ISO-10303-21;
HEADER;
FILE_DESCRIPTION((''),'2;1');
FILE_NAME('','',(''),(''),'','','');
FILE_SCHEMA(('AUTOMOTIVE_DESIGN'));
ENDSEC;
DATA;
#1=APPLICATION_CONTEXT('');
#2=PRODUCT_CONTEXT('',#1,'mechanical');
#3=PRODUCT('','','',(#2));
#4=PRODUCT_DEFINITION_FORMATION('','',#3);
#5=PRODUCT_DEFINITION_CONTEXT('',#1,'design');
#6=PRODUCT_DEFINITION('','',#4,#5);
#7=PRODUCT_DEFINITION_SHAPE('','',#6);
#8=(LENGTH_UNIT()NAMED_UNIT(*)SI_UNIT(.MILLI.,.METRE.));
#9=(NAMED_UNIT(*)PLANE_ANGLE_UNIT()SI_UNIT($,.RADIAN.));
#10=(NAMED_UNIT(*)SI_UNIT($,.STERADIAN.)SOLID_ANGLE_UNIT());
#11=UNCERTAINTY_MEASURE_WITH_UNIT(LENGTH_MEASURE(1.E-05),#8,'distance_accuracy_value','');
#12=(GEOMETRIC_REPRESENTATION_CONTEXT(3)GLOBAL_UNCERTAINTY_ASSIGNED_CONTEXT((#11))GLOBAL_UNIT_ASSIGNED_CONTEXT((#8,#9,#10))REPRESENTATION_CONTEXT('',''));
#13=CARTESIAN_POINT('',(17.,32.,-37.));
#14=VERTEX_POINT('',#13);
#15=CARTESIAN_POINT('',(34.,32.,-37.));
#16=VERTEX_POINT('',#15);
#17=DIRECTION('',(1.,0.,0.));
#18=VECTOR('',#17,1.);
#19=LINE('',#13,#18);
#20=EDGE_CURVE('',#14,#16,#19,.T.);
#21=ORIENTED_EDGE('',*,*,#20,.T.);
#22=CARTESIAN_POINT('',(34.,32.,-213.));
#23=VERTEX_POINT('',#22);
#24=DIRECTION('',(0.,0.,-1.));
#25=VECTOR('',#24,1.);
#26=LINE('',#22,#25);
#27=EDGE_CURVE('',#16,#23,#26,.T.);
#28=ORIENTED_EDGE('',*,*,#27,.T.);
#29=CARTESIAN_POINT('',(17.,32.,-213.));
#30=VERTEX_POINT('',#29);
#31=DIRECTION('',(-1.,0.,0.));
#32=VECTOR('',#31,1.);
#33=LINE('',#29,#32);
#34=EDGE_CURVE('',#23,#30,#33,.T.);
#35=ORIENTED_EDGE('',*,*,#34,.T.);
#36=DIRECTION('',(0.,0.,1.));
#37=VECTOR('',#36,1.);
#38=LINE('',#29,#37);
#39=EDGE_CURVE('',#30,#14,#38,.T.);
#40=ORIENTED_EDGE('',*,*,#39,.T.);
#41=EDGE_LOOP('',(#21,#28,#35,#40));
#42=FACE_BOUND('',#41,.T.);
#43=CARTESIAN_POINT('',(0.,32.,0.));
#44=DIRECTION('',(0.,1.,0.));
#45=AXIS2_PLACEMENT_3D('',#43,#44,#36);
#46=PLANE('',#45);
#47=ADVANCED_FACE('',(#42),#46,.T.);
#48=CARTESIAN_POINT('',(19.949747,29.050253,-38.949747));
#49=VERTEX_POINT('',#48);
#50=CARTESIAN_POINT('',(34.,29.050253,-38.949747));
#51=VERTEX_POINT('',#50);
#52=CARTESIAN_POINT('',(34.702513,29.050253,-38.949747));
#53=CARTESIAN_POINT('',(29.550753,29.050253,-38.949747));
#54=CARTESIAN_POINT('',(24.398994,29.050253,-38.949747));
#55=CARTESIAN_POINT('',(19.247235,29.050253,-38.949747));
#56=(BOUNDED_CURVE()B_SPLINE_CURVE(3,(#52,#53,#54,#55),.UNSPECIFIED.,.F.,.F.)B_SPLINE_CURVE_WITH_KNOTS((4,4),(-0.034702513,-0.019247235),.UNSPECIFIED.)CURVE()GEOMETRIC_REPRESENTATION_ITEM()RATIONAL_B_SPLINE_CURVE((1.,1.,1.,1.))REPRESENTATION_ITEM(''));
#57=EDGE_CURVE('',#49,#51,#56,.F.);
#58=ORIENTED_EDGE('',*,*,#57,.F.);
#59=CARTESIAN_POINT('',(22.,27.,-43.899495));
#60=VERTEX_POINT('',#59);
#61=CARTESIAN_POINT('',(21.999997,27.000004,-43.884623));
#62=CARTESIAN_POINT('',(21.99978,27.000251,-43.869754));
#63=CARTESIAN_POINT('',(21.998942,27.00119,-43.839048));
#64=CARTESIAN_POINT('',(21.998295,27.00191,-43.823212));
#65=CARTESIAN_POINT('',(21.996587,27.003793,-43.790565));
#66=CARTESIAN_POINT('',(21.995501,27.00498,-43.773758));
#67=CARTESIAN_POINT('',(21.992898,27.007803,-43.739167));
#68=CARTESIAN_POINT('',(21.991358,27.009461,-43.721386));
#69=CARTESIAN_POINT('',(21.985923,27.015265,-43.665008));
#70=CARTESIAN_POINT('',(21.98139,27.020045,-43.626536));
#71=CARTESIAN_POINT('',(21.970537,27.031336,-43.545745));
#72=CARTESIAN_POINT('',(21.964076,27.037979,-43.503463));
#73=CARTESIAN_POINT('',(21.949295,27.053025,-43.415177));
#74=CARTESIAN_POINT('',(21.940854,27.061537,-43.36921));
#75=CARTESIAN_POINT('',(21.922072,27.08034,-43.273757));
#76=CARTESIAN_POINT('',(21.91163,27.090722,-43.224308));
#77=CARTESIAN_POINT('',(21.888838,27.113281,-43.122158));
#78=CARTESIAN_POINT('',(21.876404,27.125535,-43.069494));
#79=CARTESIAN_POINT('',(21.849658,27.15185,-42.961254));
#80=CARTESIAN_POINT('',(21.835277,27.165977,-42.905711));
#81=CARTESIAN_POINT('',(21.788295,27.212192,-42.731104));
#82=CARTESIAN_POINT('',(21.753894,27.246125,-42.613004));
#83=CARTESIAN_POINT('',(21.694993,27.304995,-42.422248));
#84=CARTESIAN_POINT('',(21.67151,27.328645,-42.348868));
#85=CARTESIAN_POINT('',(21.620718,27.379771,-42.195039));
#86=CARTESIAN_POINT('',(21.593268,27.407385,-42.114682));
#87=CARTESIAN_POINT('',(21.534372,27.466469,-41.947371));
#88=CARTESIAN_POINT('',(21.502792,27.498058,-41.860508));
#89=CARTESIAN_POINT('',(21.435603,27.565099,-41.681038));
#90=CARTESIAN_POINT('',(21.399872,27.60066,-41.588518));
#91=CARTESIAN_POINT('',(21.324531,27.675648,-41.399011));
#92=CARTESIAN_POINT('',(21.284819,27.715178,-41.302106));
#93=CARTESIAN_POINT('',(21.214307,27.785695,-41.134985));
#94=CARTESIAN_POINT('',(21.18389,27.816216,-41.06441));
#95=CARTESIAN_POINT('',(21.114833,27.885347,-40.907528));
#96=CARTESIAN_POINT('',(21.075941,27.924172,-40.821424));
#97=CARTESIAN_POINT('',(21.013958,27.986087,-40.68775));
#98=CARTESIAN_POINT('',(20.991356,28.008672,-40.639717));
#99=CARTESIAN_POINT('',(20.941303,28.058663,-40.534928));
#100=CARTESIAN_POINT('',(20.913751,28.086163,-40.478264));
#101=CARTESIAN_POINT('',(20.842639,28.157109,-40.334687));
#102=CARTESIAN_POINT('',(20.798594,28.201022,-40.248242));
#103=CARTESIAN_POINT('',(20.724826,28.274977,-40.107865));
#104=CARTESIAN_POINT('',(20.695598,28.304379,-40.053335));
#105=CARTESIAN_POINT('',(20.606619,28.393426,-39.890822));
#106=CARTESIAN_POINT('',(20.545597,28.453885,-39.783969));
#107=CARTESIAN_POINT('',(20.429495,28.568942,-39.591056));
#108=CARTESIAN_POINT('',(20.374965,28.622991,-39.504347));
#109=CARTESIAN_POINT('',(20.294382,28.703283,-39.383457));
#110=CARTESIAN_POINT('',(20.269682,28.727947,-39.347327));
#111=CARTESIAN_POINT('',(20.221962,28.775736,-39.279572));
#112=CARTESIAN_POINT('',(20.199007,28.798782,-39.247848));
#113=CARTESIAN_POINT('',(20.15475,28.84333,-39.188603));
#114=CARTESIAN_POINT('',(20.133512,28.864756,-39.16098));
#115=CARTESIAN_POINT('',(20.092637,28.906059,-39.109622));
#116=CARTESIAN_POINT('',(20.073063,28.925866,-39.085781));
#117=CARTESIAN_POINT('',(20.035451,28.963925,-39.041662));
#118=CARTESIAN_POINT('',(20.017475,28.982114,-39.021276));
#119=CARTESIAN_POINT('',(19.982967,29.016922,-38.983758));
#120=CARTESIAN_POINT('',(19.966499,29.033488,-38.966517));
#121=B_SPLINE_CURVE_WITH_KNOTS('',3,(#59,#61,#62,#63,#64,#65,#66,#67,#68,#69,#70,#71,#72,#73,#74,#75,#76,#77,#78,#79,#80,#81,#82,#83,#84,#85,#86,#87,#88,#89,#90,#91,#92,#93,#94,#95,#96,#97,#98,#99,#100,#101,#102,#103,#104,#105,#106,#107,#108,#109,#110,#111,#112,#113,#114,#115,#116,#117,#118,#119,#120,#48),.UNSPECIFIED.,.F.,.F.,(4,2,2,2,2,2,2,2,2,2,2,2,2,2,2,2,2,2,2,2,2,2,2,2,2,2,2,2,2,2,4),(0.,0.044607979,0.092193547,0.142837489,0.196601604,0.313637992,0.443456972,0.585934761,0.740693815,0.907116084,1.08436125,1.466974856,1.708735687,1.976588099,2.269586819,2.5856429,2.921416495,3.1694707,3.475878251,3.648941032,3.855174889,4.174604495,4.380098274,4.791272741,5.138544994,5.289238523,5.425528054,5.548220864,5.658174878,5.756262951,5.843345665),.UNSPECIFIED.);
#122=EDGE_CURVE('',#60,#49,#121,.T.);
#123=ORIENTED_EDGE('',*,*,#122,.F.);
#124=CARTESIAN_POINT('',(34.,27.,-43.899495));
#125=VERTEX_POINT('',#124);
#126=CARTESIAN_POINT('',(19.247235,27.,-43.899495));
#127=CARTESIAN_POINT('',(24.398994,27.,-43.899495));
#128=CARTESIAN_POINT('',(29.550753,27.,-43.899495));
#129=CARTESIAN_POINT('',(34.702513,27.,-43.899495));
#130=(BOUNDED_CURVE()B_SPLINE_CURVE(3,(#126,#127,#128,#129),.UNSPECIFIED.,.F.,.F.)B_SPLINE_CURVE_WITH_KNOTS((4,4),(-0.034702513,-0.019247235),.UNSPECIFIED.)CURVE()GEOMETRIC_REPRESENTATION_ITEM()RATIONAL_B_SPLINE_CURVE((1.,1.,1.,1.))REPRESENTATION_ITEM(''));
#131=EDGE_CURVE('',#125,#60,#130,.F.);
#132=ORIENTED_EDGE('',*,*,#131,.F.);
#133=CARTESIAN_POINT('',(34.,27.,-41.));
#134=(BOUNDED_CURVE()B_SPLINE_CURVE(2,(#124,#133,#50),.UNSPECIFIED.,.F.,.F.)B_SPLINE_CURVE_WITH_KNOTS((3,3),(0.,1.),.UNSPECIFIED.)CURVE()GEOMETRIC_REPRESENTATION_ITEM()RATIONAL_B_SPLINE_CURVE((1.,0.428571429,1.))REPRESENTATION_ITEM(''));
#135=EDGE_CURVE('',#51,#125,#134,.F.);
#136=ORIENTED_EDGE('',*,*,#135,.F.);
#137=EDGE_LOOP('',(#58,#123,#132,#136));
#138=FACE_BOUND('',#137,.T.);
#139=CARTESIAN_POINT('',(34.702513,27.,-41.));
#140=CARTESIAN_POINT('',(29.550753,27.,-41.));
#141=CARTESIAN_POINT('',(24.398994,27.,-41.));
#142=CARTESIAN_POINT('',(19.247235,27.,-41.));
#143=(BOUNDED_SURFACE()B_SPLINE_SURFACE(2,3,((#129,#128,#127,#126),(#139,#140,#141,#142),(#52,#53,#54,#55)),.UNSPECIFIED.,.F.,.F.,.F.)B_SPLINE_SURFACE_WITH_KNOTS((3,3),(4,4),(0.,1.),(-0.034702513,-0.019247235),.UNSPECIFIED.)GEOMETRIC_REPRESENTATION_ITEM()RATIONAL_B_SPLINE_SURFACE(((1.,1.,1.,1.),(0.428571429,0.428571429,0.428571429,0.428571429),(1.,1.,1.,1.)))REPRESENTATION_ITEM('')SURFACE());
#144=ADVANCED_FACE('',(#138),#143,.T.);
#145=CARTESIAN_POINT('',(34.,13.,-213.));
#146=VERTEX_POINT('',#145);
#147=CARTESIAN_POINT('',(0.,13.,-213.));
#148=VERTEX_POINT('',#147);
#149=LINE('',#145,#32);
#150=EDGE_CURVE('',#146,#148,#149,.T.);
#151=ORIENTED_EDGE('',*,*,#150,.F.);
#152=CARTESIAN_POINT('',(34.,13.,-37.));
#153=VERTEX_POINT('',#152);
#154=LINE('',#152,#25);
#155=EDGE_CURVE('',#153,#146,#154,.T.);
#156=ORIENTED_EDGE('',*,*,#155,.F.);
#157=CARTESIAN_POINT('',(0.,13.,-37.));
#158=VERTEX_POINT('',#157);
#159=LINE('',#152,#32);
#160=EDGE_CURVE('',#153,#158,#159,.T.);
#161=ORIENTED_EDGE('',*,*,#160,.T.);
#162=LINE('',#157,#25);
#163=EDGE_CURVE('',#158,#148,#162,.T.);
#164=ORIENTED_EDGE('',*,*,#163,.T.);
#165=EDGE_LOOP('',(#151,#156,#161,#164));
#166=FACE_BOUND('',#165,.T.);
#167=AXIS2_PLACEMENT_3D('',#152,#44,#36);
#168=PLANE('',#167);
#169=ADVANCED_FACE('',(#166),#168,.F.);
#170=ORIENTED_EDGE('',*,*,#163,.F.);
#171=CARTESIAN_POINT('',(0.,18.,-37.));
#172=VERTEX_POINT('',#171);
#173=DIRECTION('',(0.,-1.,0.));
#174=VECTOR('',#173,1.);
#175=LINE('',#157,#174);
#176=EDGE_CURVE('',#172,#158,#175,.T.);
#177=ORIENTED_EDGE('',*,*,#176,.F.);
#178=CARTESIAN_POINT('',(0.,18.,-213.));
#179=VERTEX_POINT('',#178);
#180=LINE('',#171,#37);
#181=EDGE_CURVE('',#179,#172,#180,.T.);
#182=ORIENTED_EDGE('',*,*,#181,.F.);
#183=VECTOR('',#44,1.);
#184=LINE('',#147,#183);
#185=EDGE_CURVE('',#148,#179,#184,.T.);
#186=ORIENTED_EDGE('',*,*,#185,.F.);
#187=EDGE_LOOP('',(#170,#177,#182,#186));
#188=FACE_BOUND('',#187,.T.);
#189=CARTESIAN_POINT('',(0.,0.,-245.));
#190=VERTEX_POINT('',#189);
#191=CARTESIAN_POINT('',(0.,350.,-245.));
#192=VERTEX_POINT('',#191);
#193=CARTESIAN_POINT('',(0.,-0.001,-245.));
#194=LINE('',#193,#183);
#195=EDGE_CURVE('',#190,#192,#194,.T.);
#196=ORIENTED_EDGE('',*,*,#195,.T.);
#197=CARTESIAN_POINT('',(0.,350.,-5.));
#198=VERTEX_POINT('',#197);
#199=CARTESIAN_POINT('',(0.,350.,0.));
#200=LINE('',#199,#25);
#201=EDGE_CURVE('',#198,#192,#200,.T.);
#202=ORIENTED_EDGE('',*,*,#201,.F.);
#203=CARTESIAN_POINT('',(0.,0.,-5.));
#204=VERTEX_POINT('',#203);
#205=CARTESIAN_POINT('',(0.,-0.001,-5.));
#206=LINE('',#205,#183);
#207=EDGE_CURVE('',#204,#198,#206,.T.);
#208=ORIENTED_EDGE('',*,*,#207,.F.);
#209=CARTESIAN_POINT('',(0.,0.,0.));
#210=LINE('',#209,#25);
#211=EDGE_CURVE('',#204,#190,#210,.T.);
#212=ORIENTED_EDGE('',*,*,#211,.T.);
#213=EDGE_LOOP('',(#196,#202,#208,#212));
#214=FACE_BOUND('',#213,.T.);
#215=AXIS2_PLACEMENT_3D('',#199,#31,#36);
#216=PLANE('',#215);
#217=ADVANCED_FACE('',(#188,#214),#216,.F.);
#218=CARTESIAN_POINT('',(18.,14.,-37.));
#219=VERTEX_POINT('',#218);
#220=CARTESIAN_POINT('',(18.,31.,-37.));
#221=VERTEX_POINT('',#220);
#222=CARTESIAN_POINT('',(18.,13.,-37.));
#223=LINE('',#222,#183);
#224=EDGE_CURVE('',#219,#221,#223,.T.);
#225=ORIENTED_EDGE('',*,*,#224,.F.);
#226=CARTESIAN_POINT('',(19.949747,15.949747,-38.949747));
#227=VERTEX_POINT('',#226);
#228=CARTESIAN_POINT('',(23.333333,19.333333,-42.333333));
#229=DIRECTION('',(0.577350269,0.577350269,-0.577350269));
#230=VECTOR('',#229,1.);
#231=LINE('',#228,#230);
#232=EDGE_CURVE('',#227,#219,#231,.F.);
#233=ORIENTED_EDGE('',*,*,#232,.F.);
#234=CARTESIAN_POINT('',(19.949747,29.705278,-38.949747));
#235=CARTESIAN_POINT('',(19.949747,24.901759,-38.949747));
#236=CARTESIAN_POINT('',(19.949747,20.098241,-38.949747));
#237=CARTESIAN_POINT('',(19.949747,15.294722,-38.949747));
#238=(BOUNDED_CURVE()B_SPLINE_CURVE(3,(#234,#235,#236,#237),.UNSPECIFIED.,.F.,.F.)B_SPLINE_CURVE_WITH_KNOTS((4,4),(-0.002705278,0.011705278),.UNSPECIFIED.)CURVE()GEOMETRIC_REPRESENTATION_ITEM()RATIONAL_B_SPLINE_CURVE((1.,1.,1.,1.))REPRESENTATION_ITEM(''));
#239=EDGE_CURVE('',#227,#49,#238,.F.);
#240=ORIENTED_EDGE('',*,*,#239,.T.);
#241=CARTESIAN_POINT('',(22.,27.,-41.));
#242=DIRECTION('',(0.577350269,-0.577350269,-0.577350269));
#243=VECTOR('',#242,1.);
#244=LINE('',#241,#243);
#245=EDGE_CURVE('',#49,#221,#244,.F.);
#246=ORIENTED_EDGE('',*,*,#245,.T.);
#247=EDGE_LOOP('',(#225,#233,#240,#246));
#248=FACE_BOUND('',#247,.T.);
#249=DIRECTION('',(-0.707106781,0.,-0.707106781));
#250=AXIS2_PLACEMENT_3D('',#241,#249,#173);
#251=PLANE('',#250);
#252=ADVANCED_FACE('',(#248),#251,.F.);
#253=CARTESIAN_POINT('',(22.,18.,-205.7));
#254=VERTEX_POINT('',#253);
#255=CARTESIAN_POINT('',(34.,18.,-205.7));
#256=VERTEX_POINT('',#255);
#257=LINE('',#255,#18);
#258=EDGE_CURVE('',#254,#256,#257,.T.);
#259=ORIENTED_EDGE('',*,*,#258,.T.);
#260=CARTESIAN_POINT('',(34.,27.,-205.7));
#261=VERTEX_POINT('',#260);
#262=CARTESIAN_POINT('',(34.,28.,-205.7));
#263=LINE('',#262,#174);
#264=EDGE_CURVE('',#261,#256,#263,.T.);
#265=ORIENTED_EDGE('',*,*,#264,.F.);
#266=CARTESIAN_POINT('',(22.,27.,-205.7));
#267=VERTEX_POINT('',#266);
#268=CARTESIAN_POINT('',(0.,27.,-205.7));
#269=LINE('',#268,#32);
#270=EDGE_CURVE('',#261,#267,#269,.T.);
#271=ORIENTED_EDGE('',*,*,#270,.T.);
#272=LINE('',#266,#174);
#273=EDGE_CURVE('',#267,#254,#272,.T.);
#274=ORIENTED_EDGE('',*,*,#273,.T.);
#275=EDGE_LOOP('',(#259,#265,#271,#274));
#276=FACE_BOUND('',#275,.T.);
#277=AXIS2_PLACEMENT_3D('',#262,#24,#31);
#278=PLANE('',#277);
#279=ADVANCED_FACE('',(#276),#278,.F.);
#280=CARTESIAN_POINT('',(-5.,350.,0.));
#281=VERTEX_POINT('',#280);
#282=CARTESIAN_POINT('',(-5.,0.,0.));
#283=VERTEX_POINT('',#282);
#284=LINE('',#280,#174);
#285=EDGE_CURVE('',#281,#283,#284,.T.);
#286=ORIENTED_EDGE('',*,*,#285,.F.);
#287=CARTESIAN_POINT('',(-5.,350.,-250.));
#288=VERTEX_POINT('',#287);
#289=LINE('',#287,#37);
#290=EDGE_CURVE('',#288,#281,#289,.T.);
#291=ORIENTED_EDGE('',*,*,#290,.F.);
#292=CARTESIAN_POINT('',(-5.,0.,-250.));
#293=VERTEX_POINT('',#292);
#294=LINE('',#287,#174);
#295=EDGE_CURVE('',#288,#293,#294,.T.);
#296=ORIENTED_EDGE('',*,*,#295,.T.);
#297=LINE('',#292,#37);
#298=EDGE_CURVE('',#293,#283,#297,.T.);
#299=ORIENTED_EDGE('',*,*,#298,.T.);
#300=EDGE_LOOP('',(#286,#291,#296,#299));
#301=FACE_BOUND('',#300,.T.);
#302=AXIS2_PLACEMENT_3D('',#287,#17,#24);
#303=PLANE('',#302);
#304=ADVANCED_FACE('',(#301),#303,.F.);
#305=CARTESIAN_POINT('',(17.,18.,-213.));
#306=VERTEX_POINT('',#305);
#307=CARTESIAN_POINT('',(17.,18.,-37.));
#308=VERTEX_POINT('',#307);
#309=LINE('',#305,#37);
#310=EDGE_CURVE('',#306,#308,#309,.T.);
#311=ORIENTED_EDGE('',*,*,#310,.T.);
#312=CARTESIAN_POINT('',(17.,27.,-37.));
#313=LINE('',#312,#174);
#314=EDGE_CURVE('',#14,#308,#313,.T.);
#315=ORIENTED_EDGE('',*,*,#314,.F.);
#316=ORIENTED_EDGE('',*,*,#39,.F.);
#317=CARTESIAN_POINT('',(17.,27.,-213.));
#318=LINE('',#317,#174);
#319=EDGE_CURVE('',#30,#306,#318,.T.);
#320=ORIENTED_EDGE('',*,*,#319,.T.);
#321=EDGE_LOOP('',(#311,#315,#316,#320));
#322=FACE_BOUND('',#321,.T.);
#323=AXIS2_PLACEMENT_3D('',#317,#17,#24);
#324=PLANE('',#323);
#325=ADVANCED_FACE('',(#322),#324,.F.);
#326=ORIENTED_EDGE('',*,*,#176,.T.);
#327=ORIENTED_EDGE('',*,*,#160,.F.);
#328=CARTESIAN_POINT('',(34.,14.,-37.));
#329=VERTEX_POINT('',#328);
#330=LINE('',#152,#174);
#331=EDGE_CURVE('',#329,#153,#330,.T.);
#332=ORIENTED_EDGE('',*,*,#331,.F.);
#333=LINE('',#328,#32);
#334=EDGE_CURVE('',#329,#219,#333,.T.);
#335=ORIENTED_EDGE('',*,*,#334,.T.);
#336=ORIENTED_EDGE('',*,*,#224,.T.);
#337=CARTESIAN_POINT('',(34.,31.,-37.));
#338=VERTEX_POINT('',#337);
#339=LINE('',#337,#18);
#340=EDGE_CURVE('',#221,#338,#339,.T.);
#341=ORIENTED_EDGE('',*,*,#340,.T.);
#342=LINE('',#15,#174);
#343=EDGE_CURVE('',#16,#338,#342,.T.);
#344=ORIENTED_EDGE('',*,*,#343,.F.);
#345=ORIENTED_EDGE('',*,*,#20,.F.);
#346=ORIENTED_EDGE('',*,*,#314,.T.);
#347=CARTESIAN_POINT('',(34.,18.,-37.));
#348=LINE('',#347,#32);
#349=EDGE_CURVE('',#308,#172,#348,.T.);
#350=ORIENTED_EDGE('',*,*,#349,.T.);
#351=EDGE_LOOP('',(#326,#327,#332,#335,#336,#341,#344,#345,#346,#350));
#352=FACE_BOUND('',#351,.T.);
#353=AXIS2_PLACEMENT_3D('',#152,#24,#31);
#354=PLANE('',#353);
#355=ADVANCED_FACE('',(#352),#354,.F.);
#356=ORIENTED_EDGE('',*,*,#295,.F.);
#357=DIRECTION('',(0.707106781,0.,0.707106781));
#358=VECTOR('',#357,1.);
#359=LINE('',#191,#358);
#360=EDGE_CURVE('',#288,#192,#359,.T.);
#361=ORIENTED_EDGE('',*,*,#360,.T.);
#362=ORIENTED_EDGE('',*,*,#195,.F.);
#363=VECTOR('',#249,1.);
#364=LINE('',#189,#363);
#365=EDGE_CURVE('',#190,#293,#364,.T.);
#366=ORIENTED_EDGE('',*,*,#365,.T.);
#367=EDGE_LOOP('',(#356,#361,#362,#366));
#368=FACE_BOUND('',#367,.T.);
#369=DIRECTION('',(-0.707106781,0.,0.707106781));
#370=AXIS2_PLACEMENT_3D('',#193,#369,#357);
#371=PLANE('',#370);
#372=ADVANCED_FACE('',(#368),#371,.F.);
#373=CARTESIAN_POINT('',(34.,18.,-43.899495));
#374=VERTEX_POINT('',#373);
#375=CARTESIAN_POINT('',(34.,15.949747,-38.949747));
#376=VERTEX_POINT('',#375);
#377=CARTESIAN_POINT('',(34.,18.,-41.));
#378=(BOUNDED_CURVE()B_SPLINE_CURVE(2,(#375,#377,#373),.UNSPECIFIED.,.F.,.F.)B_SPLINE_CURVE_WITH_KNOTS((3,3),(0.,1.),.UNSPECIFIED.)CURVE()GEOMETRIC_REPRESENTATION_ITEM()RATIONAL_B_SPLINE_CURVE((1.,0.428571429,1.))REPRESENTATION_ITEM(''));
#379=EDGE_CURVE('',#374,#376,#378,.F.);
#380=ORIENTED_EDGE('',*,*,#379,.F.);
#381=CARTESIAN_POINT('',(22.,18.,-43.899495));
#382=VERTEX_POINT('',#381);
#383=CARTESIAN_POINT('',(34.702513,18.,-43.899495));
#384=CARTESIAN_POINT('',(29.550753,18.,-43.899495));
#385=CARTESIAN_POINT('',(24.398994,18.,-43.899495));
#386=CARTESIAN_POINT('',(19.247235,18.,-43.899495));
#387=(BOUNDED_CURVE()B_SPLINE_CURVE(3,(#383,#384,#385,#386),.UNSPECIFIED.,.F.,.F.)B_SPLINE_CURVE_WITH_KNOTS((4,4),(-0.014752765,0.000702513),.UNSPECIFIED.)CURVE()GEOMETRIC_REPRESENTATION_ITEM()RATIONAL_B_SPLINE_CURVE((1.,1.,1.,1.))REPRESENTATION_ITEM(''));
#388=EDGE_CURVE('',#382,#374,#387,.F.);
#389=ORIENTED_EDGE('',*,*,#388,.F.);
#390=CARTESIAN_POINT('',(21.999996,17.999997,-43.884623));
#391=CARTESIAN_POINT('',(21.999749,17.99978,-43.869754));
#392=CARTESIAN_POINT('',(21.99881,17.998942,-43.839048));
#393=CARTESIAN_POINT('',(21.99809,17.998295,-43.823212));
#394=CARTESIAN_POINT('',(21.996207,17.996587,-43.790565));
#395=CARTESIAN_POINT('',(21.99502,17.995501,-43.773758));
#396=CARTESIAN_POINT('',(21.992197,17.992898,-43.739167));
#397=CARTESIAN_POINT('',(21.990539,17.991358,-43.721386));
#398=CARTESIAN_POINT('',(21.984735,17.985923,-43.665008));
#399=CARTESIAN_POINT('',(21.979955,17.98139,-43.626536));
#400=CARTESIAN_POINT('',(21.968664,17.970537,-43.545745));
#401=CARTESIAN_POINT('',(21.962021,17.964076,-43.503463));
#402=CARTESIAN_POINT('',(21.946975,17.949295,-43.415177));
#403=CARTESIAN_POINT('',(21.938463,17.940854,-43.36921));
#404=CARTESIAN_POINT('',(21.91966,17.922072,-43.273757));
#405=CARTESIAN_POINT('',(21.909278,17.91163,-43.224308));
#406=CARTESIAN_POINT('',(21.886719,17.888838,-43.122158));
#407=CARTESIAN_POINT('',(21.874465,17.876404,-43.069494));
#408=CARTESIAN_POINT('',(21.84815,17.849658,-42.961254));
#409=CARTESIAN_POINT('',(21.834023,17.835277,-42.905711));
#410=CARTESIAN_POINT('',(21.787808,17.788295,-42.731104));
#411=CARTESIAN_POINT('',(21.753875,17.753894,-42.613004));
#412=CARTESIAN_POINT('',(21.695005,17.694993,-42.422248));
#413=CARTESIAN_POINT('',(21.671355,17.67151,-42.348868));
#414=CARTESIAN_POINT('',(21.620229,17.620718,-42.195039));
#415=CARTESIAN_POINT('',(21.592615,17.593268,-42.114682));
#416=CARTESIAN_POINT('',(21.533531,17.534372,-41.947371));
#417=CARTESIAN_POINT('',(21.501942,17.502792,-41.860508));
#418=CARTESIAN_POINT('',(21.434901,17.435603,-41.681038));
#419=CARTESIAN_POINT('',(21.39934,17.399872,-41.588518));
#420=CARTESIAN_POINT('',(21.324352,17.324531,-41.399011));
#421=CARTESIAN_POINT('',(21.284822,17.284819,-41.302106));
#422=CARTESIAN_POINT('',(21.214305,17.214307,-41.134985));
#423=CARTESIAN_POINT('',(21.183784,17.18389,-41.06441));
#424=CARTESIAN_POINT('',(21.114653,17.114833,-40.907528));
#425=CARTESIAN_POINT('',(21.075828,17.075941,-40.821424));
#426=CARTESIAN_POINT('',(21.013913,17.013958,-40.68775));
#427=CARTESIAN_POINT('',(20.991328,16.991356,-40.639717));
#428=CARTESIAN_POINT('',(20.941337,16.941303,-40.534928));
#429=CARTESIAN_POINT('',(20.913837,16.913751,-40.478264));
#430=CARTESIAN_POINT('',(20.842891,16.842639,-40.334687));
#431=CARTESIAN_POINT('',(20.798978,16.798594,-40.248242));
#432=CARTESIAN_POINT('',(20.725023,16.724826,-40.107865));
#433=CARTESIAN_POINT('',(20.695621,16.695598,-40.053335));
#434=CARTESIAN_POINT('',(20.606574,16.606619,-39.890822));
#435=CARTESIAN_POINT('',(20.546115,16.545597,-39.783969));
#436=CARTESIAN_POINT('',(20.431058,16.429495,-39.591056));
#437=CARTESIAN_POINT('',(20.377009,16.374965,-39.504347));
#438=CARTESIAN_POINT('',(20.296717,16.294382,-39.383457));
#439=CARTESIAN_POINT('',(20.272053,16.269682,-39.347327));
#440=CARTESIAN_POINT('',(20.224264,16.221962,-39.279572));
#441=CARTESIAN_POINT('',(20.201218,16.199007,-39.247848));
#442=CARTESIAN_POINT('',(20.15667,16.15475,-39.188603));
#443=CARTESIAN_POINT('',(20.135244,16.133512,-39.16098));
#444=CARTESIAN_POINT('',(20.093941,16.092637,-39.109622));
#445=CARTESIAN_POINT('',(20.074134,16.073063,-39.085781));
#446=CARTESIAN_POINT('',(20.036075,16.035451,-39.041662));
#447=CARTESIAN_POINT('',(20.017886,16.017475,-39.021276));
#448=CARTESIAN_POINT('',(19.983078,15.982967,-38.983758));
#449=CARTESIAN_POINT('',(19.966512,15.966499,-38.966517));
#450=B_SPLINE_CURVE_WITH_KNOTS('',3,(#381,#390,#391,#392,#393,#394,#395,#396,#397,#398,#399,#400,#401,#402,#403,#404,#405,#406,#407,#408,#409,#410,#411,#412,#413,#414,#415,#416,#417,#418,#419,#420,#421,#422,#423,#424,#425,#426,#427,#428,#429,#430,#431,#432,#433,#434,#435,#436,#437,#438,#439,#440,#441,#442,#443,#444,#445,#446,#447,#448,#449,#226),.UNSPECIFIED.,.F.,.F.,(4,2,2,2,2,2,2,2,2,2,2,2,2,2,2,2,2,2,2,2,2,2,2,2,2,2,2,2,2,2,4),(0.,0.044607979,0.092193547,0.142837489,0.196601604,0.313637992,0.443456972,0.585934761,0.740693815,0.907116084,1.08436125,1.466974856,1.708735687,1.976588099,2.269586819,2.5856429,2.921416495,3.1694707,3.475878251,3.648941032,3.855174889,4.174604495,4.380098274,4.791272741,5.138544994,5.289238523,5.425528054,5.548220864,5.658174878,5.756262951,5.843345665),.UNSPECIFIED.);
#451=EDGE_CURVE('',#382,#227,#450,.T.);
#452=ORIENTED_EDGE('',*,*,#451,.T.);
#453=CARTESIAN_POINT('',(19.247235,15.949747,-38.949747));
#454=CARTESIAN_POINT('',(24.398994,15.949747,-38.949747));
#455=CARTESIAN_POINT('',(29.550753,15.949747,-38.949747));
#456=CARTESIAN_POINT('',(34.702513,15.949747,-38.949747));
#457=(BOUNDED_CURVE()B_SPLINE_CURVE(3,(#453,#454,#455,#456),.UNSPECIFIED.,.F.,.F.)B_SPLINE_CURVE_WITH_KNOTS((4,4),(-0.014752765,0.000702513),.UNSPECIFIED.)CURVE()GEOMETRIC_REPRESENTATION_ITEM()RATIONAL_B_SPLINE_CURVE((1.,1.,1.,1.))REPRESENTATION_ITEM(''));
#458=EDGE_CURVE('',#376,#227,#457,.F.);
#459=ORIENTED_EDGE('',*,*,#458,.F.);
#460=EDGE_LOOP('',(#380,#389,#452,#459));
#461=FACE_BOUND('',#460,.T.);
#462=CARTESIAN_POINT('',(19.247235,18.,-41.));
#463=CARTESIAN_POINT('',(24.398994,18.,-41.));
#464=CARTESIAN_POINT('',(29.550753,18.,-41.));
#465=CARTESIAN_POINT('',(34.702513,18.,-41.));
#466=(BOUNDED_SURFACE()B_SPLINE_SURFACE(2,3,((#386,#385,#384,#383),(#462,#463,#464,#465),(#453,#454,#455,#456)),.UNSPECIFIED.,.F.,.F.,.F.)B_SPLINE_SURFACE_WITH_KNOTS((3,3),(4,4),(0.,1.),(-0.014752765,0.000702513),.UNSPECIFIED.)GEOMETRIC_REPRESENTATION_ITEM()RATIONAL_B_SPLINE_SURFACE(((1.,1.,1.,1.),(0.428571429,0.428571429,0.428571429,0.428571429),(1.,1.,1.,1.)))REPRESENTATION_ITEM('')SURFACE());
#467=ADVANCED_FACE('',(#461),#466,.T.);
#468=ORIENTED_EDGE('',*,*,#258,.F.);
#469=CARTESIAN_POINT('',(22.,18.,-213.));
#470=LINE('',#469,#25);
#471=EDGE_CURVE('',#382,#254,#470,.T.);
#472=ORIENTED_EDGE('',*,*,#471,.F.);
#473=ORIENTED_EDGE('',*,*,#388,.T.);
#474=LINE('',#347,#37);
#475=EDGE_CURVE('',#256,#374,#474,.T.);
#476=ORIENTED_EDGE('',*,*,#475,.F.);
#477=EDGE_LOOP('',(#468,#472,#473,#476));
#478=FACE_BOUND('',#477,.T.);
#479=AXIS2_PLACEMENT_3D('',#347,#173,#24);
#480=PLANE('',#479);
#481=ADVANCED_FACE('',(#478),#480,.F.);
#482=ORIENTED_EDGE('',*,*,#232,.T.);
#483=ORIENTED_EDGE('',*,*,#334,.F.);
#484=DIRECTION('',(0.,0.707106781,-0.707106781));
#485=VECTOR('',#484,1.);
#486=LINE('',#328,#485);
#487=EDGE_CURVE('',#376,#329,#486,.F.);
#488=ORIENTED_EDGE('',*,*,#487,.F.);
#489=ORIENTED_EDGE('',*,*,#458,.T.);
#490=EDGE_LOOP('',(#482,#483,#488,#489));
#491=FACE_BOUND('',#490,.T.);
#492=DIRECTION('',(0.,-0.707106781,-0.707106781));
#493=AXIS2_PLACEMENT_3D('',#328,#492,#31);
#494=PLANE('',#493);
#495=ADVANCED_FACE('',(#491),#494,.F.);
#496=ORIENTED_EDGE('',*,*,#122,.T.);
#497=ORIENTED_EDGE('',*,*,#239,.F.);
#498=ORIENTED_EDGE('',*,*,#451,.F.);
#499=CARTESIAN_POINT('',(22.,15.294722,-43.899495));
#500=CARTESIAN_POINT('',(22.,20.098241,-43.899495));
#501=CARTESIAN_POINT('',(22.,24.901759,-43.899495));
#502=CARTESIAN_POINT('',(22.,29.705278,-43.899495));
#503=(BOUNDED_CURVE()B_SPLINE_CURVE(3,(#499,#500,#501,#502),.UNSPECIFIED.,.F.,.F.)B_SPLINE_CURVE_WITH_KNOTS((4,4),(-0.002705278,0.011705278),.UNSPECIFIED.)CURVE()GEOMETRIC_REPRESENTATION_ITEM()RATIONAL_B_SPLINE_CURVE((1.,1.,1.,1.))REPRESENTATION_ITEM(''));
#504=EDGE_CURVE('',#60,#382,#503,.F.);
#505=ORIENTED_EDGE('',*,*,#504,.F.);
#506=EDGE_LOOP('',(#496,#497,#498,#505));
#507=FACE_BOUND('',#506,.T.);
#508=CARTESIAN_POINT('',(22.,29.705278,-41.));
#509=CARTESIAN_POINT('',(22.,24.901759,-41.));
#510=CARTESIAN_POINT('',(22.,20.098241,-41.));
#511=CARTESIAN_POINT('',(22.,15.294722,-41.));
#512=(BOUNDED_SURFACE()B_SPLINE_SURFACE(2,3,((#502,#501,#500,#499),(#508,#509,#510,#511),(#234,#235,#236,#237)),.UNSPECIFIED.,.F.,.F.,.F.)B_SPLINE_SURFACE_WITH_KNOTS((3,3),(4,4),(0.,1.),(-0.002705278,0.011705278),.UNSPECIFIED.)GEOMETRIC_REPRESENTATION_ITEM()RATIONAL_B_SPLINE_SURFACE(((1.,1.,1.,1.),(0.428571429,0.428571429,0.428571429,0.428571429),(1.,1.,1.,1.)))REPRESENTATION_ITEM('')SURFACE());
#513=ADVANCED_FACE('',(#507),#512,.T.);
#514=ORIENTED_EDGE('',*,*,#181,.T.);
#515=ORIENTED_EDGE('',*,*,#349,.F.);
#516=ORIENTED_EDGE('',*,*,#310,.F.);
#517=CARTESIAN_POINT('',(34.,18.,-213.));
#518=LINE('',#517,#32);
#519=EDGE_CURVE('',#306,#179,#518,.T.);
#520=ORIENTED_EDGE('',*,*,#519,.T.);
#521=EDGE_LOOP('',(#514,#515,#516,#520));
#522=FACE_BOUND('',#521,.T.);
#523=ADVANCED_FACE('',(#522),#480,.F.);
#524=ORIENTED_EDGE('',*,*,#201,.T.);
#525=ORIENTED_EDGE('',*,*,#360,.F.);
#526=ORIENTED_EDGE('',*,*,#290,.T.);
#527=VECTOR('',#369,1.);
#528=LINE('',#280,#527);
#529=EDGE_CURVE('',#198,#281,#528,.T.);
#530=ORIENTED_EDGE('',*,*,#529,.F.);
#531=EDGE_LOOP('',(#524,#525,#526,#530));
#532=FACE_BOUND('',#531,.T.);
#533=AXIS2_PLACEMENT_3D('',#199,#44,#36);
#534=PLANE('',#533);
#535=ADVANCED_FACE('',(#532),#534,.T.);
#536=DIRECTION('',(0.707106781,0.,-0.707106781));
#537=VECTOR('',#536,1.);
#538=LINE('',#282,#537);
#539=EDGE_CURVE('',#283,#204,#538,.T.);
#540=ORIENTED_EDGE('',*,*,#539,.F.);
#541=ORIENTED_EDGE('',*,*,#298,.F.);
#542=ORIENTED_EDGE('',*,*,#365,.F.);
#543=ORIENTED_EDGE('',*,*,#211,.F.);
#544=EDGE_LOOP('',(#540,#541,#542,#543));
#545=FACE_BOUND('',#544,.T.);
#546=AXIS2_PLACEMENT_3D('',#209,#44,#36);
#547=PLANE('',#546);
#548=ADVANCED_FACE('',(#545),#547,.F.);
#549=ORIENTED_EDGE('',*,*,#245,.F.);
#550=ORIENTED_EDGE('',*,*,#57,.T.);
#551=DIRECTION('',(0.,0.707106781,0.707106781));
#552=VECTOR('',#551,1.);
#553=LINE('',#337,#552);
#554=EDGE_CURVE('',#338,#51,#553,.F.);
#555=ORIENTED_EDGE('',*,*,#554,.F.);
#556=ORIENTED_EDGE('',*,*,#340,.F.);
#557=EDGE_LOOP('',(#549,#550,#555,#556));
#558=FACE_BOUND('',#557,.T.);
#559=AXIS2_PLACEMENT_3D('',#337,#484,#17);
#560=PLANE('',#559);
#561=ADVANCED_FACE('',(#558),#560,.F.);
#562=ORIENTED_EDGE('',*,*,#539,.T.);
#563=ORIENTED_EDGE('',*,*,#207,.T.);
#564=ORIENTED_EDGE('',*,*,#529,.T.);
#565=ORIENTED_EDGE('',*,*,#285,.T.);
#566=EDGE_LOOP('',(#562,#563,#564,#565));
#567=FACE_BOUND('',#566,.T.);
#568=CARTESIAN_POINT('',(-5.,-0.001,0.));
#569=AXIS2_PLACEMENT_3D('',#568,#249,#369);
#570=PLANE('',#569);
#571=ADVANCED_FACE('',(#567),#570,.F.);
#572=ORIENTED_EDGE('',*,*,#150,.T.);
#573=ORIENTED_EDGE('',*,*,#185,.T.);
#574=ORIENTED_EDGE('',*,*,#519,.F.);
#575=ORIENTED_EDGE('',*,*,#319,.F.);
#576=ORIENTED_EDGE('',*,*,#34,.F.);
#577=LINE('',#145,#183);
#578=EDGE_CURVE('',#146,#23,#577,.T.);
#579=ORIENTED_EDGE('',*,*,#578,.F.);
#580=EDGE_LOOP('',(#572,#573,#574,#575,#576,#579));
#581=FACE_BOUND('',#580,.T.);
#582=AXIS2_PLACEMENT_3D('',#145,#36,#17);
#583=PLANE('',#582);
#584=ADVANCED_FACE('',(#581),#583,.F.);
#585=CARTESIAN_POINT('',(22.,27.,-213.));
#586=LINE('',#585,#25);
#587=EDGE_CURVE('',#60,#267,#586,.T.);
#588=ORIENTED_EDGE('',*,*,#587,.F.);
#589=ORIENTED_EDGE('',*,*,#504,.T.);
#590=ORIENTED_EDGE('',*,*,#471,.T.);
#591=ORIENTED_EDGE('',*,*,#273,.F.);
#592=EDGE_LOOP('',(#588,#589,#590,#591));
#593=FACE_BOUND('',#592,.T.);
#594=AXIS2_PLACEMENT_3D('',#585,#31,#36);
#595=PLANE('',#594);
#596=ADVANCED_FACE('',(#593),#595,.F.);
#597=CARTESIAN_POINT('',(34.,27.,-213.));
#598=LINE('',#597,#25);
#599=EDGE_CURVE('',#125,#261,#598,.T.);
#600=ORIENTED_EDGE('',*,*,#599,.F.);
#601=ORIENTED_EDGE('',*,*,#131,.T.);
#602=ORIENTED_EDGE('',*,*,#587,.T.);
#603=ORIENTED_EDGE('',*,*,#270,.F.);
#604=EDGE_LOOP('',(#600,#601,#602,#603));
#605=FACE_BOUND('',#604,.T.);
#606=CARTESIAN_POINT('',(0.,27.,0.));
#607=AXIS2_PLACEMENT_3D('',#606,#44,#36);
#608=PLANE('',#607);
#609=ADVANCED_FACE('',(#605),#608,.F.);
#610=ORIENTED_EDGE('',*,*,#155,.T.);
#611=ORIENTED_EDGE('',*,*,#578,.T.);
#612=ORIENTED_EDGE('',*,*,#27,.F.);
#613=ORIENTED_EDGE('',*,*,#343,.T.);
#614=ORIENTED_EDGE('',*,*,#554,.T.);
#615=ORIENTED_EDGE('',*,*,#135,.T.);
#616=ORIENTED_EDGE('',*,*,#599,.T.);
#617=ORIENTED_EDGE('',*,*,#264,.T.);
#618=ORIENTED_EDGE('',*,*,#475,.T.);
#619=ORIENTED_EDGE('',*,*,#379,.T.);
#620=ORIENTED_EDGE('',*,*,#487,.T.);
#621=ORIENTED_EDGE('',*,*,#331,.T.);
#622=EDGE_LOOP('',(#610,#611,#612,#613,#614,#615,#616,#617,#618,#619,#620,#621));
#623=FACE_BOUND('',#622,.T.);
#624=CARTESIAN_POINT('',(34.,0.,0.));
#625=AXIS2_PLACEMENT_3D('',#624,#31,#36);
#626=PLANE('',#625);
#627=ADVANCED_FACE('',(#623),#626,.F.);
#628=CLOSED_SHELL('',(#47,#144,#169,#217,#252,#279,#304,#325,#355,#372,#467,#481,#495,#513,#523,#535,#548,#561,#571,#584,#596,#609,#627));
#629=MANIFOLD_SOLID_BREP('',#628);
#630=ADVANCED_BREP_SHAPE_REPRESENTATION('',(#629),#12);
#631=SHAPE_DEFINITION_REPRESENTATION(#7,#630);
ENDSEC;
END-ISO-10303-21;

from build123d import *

# Parameters (mm, degrees)
CROQUIS1_W              = 5
CROQUIS1_H              = 250
SALIENTE_EXTRUIR1_DEPTH = 350
CORTAR_EXTRUIR1_REACH   = 432.145
CROQUIS4_W              = 176
CROQUIS4_H              = 5
SALIENTE_EXTRUIR2_DEPTH = 34
CROQUIS5_W              = 5
CROQUIS5_H              = 176
SALIENTE_EXTRUIR3_DEPTH = 9
CROQUIS6_W              = 17
CROQUIS6_H              = 176
SALIENTE_EXTRUIR4_DEPTH = 5
CHAFL_N1_SIZE           = 4
CROQUIS7_W              = 14.582348404
CROQUIS7_H              = 7.3
SALIENTE_EXTRUIR5_DEPTH = 10


with BuildPart() as part:
    # Croquis1 → Saliente-Extruir1 (new body)
    with BuildSketch(Plane(origin=(0, 0, 0), x_dir=(1, 0, 0), z_dir=(0, 1, 0))):
        with Locations((-2.5, 125)):
            Rectangle(CROQUIS1_W, CROQUIS1_H)
    extrude(amount=SALIENTE_EXTRUIR1_DEPTH)

    # Croquis2 → Cortar-Extruir1 (cut, up to next)
    with BuildSketch(Plane(origin=(0, 350, 0), x_dir=(1, 0, 0), z_dir=(0, 1, 0)), mode=Mode.PRIVATE) as cortar_extruir1_sk1:
        Polygon((0, 250), (0, 245), (-5, 250), align=None)
    cortar_extruir1_tool1 = extrude(cortar_extruir1_sk1.sketch, amount=-CORTAR_EXTRUIR1_REACH, mode=Mode.PRIVATE) & part.part
    # Croquis2 → Cortar-Extruir1 (cut, up to next)
    with BuildSketch(Plane(origin=(0, 350, 0), x_dir=(1, 0, 0), z_dir=(0, 1, 0)), mode=Mode.PRIVATE) as cortar_extruir1_sk2:
        Polygon((-5, 0), (0, 5), (0, 0), align=None)
    cortar_extruir1_tool2 = extrude(cortar_extruir1_sk2.sketch, amount=-CORTAR_EXTRUIR1_REACH, mode=Mode.PRIVATE) & part.part
    add(cortar_extruir1_tool1.solids().sort_by_distance((-1.666667, 350, -248.333333))[0], mode=Mode.SUBTRACT)
    add(cortar_extruir1_tool2.solids().sort_by_distance((-1.666667, 350, -1.666667))[0], mode=Mode.SUBTRACT)

    # Croquis4 → Saliente-Extruir2 (add)
    with BuildSketch(Plane(origin=(0, 0, 0), x_dir=(0, 0, -1), z_dir=(1, 0, 0))):
        with Locations((125, 15.5)):
            Rectangle(CROQUIS4_W, CROQUIS4_H)
    extrude(amount=SALIENTE_EXTRUIR2_DEPTH)

    # Croquis5 → Saliente-Extruir3 (add)
    with BuildSketch(Plane(origin=(0, 18, 0), x_dir=(1, 0, 0), z_dir=(0, 1, 0))):
        with Locations((19.5, 125)):
            Rectangle(CROQUIS5_W, CROQUIS5_H)
    extrude(amount=SALIENTE_EXTRUIR3_DEPTH)

    # Croquis6 → Saliente-Extruir4 (add)
    with BuildSketch(Plane(origin=(0, 27, 0), x_dir=(1, 0, 0), z_dir=(0, 1, 0))):
        with Locations((25.5, 125)):
            Rectangle(CROQUIS6_W, CROQUIS6_H)
    extrude(amount=SALIENTE_EXTRUIR4_DEPTH)

    # Chaflán1
    chafl_n1_edges = [part.edges().sort_by_distance(p)[0] for p in [
        (28, 18, -37),
        (22, 22.5, -37),
        (28, 27, -37),
    ]]
    chamfer(chafl_n1_edges, length=CHAFL_N1_SIZE)

    # Redondeo1
    # a fillet whose section is not a circle: 7 mm, written as the material it takes off along each edge
    with BuildSketch(Plane(origin=(14.751262658, 18, -41), x_dir=(0, 0, -1), z_dir=(1, 0, 0))) as redondeo1_piece_1_section:
        with BuildLine():
            Bezier((2.899494937, 0), (0, 0), (-2.050252532, -2.050252532), weights=[1, 0.428571429, 1])
            Line((-2.050252532, -2.050252532), (0, 0))
            Line((0, 0), (2.899494937, 0))
        make_face()
    redondeo1_piece_1 = extrude(amount=26.497474683, mode=Mode.PRIVATE)
    redondeo1_piece_1 = split(redondeo1_piece_1, bisect_by=Plane(origin=(22, 18, -41), z_dir=(-1, 0, 0)), keep=Keep.TOP, mode=Mode.PRIVATE)
    redondeo1_piece_1 = split(redondeo1_piece_1, bisect_by=Plane(origin=(18.375631329, 18, -37.375631329), z_dir=(0.7071067811865476, 0, 0.7071067811865476)), keep=Keep.TOP, mode=Mode.PRIVATE)
    add(redondeo1_piece_1, mode=Mode.SUBTRACT)
    with BuildSketch(Plane(origin=(22, 18, -41), x_dir=(0, 0, -1), z_dir=(1, 0, 0))) as redondeo1_piece_2_section:
        with BuildLine():
            Bezier((2.899494937, 0), (0, 0), (-2.050252532, -2.050252532), weights=[1, 0.428571429, 1])
            Line((-2.050252532, -2.050252532), (0, 0))
            Line((0, 0), (2.899494937, 0))
        make_face()
    redondeo1_piece_2 = extrude(amount=19.248737342, mode=Mode.PRIVATE)
    redondeo1_piece_2 = split(redondeo1_piece_2, bisect_by=Plane(origin=(22, 18, -41), z_dir=(-0.7071067811865476, 0, -0.7071067811865476)), keep=Keep.TOP, mode=Mode.PRIVATE)
    add(redondeo1_piece_2, mode=Mode.SUBTRACT)
    with BuildSketch(Plane(origin=(22, 18, -41), x_dir=(0, 0, -1), z_dir=(1, 0, 0))) as redondeo1_piece_3_section:
        with BuildLine():
            Bezier((2.899494937, 0), (0, 0), (-2.050252532, -2.050252532), weights=[1, 0.428571429, 1])
            Line((-2.050252532, -2.050252532), (0, 0))
            Line((0, 0), (2.899494937, 0))
        make_face()
    redondeo1_piece_3 = extrude(amount=19.248737342, mode=Mode.PRIVATE)
    redondeo1_piece_3 = split(redondeo1_piece_3, bisect_by=Plane(origin=(22, 18, -41), z_dir=(0.7071067811865476, 0, 0.7071067811865476)), keep=Keep.TOP, mode=Mode.PRIVATE)
    add(redondeo1_piece_3, mode=Mode.SUBTRACT)
    with BuildSketch(Plane(origin=(22, 10.751262658, -41), x_dir=(0, 0, -1), z_dir=(0, 1, 0))) as redondeo1_piece_4_section:
        with BuildLine():
            Bezier((2.899494937, 0), (0, 0), (-2.050252532, 2.050252532), weights=[1, 0.428571429, 1])
            Line((-2.050252532, 2.050252532), (0, 0))
            Line((0, 0), (2.899494937, 0))
        make_face()
    redondeo1_piece_4 = extrude(amount=16.248737342, mode=Mode.PRIVATE)
    redondeo1_piece_4 = split(redondeo1_piece_4, bisect_by=Plane(origin=(22, 18, -41), z_dir=(0, -1, 0)), keep=Keep.TOP, mode=Mode.PRIVATE)
    redondeo1_piece_4 = split(redondeo1_piece_4, bisect_by=Plane(origin=(22, 14.375631329, -37.375631329), z_dir=(0, 0.7071067811865476, 0.7071067811865476)), keep=Keep.TOP, mode=Mode.PRIVATE)
    add(redondeo1_piece_4, mode=Mode.SUBTRACT)
    with BuildSketch(Plane(origin=(22, 18, -41), x_dir=(0, 0, -1), z_dir=(0, 1, 0))) as redondeo1_piece_5_section:
        with BuildLine():
            Bezier((2.899494937, 0), (0, 0), (-2.050252532, 2.050252532), weights=[1, 0.428571429, 1])
            Line((-2.050252532, 2.050252532), (0, 0))
            Line((0, 0), (2.899494937, 0))
        make_face()
    redondeo1_piece_5 = extrude(amount=9, mode=Mode.PRIVATE)
    redondeo1_piece_5 = split(redondeo1_piece_5, bisect_by=Plane(origin=(22, 18, -41), z_dir=(0, -0.7071067811865476, -0.7071067811865476)), keep=Keep.TOP, mode=Mode.PRIVATE)
    add(redondeo1_piece_5, mode=Mode.SUBTRACT)
    with BuildSketch(Plane(origin=(22, 18, -41), x_dir=(0, 0, -1), z_dir=(0, 1, 0))) as redondeo1_piece_6_section:
        with BuildLine():
            Bezier((2.899494937, 0), (0, 0), (-2.050252532, 2.050252532), weights=[1, 0.428571429, 1])
            Line((-2.050252532, 2.050252532), (0, 0))
            Line((0, 0), (2.899494937, 0))
        make_face()
    redondeo1_piece_6 = extrude(amount=9, mode=Mode.PRIVATE)
    redondeo1_piece_6 = split(redondeo1_piece_6, bisect_by=Plane(origin=(22, 18, -41), z_dir=(0, 0.7071067811865476, 0.7071067811865476)), keep=Keep.TOP, mode=Mode.PRIVATE)
    redondeo1_piece_6 = split(redondeo1_piece_6, bisect_by=Plane(origin=(22, 22.5, -45.5), z_dir=(0, -0.7071067811865476, 0.7071067811865476)), keep=Keep.TOP, mode=Mode.PRIVATE)
    add(redondeo1_piece_6, mode=Mode.SUBTRACT)
    with BuildSketch(Plane(origin=(22, 18, -41), x_dir=(0, 0, -1), z_dir=(0, 1, 0))) as redondeo1_piece_7_section:
        with BuildLine():
            Bezier((2.899494937, 0), (0, 0), (-2.050252532, 2.050252532), weights=[1, 0.428571429, 1])
            Line((-2.050252532, 2.050252532), (0, 0))
            Line((0, 0), (2.899494937, 0))
        make_face()
    redondeo1_piece_7 = extrude(amount=16.248737342, mode=Mode.PRIVATE)
    redondeo1_piece_7 = split(redondeo1_piece_7, bisect_by=Plane(origin=(22, 27, -41), z_dir=(0, 1, 0)), keep=Keep.TOP, mode=Mode.PRIVATE)
    redondeo1_piece_7 = split(redondeo1_piece_7, bisect_by=Plane(origin=(22, 22.5, -45.5), z_dir=(0, -0.7071067811865476, 0.7071067811865476)), keep=Keep.TOP, mode=Mode.PRIVATE)
    add(redondeo1_piece_7, mode=Mode.SUBTRACT)
    with BuildSketch(Plane(origin=(22, 18, -41), x_dir=(0, 0, -1), z_dir=(0, 1, 0))) as redondeo1_piece_8_section:
        with BuildLine():
            Bezier((2.899494937, 0), (0, 0), (-2.050252532, 2.050252532), weights=[1, 0.428571429, 1])
            Line((-2.050252532, 2.050252532), (0, 0))
            Line((0, 0), (2.899494937, 0))
        make_face()
    redondeo1_piece_8 = extrude(amount=9, mode=Mode.PRIVATE)
    redondeo1_piece_8 = split(redondeo1_piece_8, bisect_by=Plane(origin=(22, 22.5, -45.5), z_dir=(0, 0.7071067811865476, -0.7071067811865476)), keep=Keep.TOP, mode=Mode.PRIVATE)
    add(redondeo1_piece_8, mode=Mode.SUBTRACT)
    with BuildSketch(Plane(origin=(41.248737342, 27, -41), x_dir=(0, 0, -1), z_dir=(-1, 0, 0))) as redondeo1_piece_9_section:
        with BuildLine():
            Bezier((2.899494937, 0), (0, 0), (-2.050252532, -2.050252532), weights=[1, 0.428571429, 1])
            Line((-2.050252532, -2.050252532), (0, 0))
            Line((0, 0), (2.899494937, 0))
        make_face()
    redondeo1_piece_9 = extrude(amount=19.248737342, mode=Mode.PRIVATE)
    redondeo1_piece_9 = split(redondeo1_piece_9, bisect_by=Plane(origin=(31.624368671, 27, -50.624368671), z_dir=(0.7071067811865476, 0, 0.7071067811865476)), keep=Keep.TOP, mode=Mode.PRIVATE)
    add(redondeo1_piece_9, mode=Mode.SUBTRACT)
    with BuildSketch(Plane(origin=(41.248737342, 27, -41), x_dir=(0, 0, -1), z_dir=(-1, 0, 0))) as redondeo1_piece_10_section:
        with BuildLine():
            Bezier((2.899494937, 0), (0, 0), (-2.050252532, -2.050252532), weights=[1, 0.428571429, 1])
            Line((-2.050252532, -2.050252532), (0, 0))
            Line((0, 0), (2.899494937, 0))
        make_face()
    redondeo1_piece_10 = extrude(amount=26.497474683, mode=Mode.PRIVATE)
    redondeo1_piece_10 = split(redondeo1_piece_10, bisect_by=Plane(origin=(22, 27, -41), z_dir=(-1, 0, 0)), keep=Keep.TOP, mode=Mode.PRIVATE)
    redondeo1_piece_10 = split(redondeo1_piece_10, bisect_by=Plane(origin=(31.624368671, 27, -50.624368671), z_dir=(0.7071067811865476, 0, 0.7071067811865476)), keep=Keep.TOP, mode=Mode.PRIVATE)
    add(redondeo1_piece_10, mode=Mode.SUBTRACT)
    with BuildSketch(Plane(origin=(41.248737342, 27, -41), x_dir=(0, 0, -1), z_dir=(-1, 0, 0))) as redondeo1_piece_11_section:
        with BuildLine():
            Bezier((2.899494937, 0), (0, 0), (-2.050252532, -2.050252532), weights=[1, 0.428571429, 1])
            Line((-2.050252532, -2.050252532), (0, 0))
            Line((0, 0), (2.899494937, 0))
        make_face()
    redondeo1_piece_11 = extrude(amount=19.248737342, mode=Mode.PRIVATE)
    redondeo1_piece_11 = split(redondeo1_piece_11, bisect_by=Plane(origin=(31.624368671, 27, -50.624368671), z_dir=(-0.7071067811865476, 0, -0.7071067811865476)), keep=Keep.TOP, mode=Mode.PRIVATE)
    add(redondeo1_piece_11, mode=Mode.SUBTRACT)
    with BuildSketch(Plane(origin=(14.751262658, 18, -41), x_dir=(0, 0, -1), z_dir=(1, 0, 0))) as redondeo1_piece_12a_section:
        with BuildLine():
            Bezier((2.899494937, 0), (0, 0), (-2.050252532, -2.050252532), weights=[1, 0.428571429, 1])
            Line((-2.050252532, -2.050252532), (0, 0))
            Line((0, 0), (2.899494937, 0))
        make_face()
    redondeo1_piece_12a = extrude(amount=26.497474683, mode=Mode.PRIVATE)
    redondeo1_piece_12a = split(redondeo1_piece_12a, bisect_by=Plane(origin=(22, 18, -41), z_dir=(-1, 0, 0)), keep=Keep.TOP, mode=Mode.PRIVATE)
    redondeo1_piece_12a = split(redondeo1_piece_12a, bisect_by=Plane(origin=(18.375631329, 18, -37.375631329), z_dir=(-0.7071067811865476, 0, -0.7071067811865476)), keep=Keep.TOP, mode=Mode.PRIVATE)
    redondeo1_piece_12a = split(redondeo1_piece_12a, bisect_by=Plane(origin=(17, 18, -41), z_dir=(1, 0, 0)), keep=Keep.TOP, mode=Mode.PRIVATE)
    with BuildSketch(Plane(origin=(22, 10.751262658, -41), x_dir=(0, 0, -1), z_dir=(0, 1, 0))) as redondeo1_piece_12b_section:
        with BuildLine():
            Bezier((2.899494937, 0), (0, 0), (-2.050252532, 2.050252532), weights=[1, 0.428571429, 1])
            Line((-2.050252532, 2.050252532), (0, 0))
            Line((0, 0), (2.899494937, 0))
        make_face()
    redondeo1_piece_12b = extrude(amount=16.248737342, mode=Mode.PRIVATE)
    redondeo1_piece_12b = split(redondeo1_piece_12b, bisect_by=Plane(origin=(22, 18, -41), z_dir=(0, -1, 0)), keep=Keep.TOP, mode=Mode.PRIVATE)
    redondeo1_piece_12b = split(redondeo1_piece_12b, bisect_by=Plane(origin=(22, 14.375631329, -37.375631329), z_dir=(0, -0.7071067811865476, -0.7071067811865476)), keep=Keep.TOP, mode=Mode.PRIVATE)
    redondeo1_piece_12 = redondeo1_piece_12a & redondeo1_piece_12b
    add(redondeo1_piece_12, mode=Mode.SUBTRACT)
    with BuildSketch(Plane(origin=(22, 18, -41), x_dir=(0, 0, -1), z_dir=(0, 1, 0))) as redondeo1_piece_13a_section:
        with BuildLine():
            Bezier((2.899494937, 0), (0, 0), (-2.050252532, 2.050252532), weights=[1, 0.428571429, 1])
            Line((-2.050252532, 2.050252532), (0, 0))
            Line((0, 0), (2.899494937, 0))
        make_face()
    redondeo1_piece_13a = extrude(amount=16.248737342, mode=Mode.PRIVATE)
    redondeo1_piece_13a = split(redondeo1_piece_13a, bisect_by=Plane(origin=(22, 27, -41), z_dir=(0, 1, 0)), keep=Keep.TOP, mode=Mode.PRIVATE)
    redondeo1_piece_13a = split(redondeo1_piece_13a, bisect_by=Plane(origin=(22, 22.5, -45.5), z_dir=(0, 0.7071067811865476, -0.7071067811865476)), keep=Keep.TOP, mode=Mode.PRIVATE)
    with BuildSketch(Plane(origin=(41.248737342, 27, -41), x_dir=(0, 0, -1), z_dir=(-1, 0, 0))) as redondeo1_piece_13b_section:
        with BuildLine():
            Bezier((2.899494937, 0), (0, 0), (-2.050252532, -2.050252532), weights=[1, 0.428571429, 1])
            Line((-2.050252532, -2.050252532), (0, 0))
            Line((0, 0), (2.899494937, 0))
        make_face()
    redondeo1_piece_13b = extrude(amount=26.497474683, mode=Mode.PRIVATE)
    redondeo1_piece_13b = split(redondeo1_piece_13b, bisect_by=Plane(origin=(22, 27, -41), z_dir=(-1, 0, 0)), keep=Keep.TOP, mode=Mode.PRIVATE)
    redondeo1_piece_13b = split(redondeo1_piece_13b, bisect_by=Plane(origin=(31.624368671, 27, -50.624368671), z_dir=(-0.7071067811865476, 0, -0.7071067811865476)), keep=Keep.TOP, mode=Mode.PRIVATE)
    redondeo1_piece_13 = redondeo1_piece_13a & redondeo1_piece_13b
    add(redondeo1_piece_13, mode=Mode.SUBTRACT)

    # Croquis7 → Saliente-Extruir5 (add)
    with BuildSketch(Plane(origin=(0, 18, 0), x_dir=(1, 0, 0), z_dir=(0, 1, 0))):
        with Locations((26.708825798, 209.35)):
            Rectangle(CROQUIS7_W, CROQUIS7_H)
    extrude(amount=SALIENTE_EXTRUIR5_DEPTH)


solid = part.part
